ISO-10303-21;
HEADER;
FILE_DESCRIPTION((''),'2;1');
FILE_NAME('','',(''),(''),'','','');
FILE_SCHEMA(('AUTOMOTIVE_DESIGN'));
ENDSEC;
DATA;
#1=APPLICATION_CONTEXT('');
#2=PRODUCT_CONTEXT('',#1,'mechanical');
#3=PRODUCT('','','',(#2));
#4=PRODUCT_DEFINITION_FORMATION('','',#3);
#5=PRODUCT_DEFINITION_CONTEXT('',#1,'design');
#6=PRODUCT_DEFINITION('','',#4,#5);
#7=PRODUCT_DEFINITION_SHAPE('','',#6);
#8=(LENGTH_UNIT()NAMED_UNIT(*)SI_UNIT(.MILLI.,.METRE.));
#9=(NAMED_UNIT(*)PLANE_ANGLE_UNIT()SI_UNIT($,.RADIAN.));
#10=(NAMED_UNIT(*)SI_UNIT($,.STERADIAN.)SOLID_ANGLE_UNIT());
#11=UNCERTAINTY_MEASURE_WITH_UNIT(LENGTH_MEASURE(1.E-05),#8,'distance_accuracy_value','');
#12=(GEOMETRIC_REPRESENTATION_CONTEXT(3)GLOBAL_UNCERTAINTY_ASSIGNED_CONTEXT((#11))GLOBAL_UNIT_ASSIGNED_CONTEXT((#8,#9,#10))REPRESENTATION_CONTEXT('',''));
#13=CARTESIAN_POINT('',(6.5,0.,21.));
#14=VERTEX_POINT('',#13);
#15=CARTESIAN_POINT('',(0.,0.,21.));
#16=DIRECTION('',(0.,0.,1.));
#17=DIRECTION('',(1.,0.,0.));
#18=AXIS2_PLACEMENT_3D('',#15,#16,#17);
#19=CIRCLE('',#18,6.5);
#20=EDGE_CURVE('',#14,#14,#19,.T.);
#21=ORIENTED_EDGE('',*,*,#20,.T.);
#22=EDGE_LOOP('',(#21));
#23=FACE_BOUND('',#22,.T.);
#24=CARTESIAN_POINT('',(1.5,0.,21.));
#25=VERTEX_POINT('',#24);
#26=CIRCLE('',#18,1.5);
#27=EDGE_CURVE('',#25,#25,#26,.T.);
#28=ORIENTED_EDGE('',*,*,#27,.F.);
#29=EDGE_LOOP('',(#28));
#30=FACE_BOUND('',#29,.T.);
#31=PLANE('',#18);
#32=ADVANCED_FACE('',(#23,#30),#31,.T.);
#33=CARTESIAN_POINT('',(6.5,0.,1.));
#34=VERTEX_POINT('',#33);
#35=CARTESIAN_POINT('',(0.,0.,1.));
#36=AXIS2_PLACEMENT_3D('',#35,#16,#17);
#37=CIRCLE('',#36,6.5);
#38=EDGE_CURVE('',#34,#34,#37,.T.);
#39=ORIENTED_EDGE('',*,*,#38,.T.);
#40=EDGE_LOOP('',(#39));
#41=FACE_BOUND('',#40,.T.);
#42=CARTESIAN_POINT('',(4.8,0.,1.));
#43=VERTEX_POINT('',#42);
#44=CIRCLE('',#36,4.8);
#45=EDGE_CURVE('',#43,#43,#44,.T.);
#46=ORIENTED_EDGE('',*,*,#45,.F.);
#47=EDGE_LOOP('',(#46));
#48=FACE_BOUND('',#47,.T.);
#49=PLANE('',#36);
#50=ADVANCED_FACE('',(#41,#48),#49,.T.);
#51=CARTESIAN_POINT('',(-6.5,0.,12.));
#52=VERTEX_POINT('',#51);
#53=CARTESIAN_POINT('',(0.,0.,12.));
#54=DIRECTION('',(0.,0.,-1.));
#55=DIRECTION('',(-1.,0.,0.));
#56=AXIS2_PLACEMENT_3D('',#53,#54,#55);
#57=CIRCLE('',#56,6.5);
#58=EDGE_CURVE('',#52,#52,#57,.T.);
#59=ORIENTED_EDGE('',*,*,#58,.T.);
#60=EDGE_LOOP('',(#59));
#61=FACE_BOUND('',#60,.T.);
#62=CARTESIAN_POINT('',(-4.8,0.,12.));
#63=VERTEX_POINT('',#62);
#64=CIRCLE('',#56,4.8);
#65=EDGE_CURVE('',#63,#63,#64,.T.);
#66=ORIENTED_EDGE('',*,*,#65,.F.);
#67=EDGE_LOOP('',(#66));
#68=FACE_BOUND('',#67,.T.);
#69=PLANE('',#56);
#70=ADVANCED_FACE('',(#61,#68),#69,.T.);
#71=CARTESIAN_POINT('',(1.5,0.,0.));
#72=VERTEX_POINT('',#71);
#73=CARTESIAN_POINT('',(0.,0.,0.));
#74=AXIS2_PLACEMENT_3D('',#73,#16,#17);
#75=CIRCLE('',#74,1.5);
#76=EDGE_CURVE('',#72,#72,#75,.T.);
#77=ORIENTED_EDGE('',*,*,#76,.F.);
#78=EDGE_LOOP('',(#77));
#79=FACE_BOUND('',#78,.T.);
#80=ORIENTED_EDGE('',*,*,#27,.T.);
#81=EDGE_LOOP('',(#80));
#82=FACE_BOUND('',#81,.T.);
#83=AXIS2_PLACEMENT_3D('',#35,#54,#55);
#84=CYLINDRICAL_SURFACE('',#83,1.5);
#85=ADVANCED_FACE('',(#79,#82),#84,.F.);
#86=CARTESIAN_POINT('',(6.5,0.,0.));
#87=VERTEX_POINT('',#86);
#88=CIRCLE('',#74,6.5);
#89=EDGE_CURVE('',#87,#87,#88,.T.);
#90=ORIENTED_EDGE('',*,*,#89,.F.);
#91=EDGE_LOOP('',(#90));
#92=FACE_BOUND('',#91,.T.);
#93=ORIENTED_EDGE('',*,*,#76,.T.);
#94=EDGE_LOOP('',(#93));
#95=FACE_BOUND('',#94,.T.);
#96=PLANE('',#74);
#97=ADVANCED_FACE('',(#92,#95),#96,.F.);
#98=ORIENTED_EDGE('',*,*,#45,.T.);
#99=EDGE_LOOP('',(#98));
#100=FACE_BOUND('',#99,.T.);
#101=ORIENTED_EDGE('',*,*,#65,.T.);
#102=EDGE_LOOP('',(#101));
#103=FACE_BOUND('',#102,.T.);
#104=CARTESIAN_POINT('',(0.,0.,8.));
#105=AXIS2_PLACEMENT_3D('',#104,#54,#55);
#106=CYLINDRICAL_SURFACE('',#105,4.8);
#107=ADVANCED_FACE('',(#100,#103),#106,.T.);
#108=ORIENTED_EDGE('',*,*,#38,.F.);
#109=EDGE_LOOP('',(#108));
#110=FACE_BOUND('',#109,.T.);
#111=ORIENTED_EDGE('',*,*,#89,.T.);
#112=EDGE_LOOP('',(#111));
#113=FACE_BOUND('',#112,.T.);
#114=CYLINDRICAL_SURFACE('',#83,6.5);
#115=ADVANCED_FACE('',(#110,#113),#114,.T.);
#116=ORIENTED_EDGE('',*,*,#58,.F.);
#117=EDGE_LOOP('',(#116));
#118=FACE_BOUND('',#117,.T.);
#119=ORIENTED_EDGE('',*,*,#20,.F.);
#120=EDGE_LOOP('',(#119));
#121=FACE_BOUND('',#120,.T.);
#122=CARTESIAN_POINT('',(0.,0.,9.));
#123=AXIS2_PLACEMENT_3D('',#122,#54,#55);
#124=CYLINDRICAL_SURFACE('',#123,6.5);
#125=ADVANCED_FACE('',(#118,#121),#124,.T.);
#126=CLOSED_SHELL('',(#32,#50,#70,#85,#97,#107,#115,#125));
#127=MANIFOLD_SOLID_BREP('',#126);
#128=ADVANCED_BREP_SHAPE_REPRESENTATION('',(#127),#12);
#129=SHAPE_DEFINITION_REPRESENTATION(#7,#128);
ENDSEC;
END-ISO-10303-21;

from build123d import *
from build123d.topology import SkipClean

# Parameters (mm, degrees)
SKETCH1_R               = 6.5
SKETCH1_R_2             = 1.5
BOSS_EXTRUDE1_DEPTH     = 1
SKETCH2_R               = 4.8
SKETCH2_R_2             = 1.5
BOSS_EXTRUDE2_DEPTH     = 7
SKETCH3_R               = 6.5
SKETCH3_R_2             = 1.5
BOSS_EXTRUDE3_DEPTH     = 1
CROQUIS2_R              = 6.5
CROQUIS2_R_2            = 1.5
SALIENTE_EXTRUIR1_DEPTH = 12
CROQUIS3_R              = 6.5
CROQUIS3_R_2            = 4.8
CORTAR_EXTRUIR2_DEPTH   = 4


with BuildPart() as part:
    # Sketch1 → Boss-Extrude1 (new body)
    with BuildSketch(Plane.XY):
        Circle(SKETCH1_R)
        Circle(SKETCH1_R_2, mode=Mode.SUBTRACT)
    extrude(amount=BOSS_EXTRUDE1_DEPTH)

    # Sketch2 → Boss-Extrude2 (add)
    with BuildSketch(Plane.XY.offset(1)):
        Circle(SKETCH2_R)
        Circle(SKETCH2_R_2, mode=Mode.SUBTRACT)
    extrude(amount=BOSS_EXTRUDE2_DEPTH)

    # Sketch3 → Boss-Extrude3 (add)
    with BuildSketch(Plane.XY.offset(8)):
        Circle(SKETCH3_R)
        Circle(SKETCH3_R_2, mode=Mode.SUBTRACT)
    extrude(amount=BOSS_EXTRUDE3_DEPTH)

    # Croquis2 → Saliente-Extruir1 (add)
    with BuildSketch(Plane.XY.offset(9)):
        Circle(CROQUIS2_R)
        Circle(CROQUIS2_R_2, mode=Mode.SUBTRACT)
    extrude(amount=SALIENTE_EXTRUIR1_DEPTH)

    # Croquis3 → Cortar-Extruir2 (cut)
    with SkipClean():  # the faces are left unmerged after this step: merging them gives an invalid solid
        with BuildSketch(Plane(origin=(0, 0, 8), x_dir=(-1, 0, 0), z_dir=(0, 0, -1))):
            Circle(CROQUIS3_R)
            Circle(CROQUIS3_R_2, mode=Mode.SUBTRACT)
        extrude(amount=-CORTAR_EXTRUIR2_DEPTH, mode=Mode.SUBTRACT)
    add(part.part.scale(1), mode=Mode.REPLACE)  # the faces are merged on a copy


solid = part.part
